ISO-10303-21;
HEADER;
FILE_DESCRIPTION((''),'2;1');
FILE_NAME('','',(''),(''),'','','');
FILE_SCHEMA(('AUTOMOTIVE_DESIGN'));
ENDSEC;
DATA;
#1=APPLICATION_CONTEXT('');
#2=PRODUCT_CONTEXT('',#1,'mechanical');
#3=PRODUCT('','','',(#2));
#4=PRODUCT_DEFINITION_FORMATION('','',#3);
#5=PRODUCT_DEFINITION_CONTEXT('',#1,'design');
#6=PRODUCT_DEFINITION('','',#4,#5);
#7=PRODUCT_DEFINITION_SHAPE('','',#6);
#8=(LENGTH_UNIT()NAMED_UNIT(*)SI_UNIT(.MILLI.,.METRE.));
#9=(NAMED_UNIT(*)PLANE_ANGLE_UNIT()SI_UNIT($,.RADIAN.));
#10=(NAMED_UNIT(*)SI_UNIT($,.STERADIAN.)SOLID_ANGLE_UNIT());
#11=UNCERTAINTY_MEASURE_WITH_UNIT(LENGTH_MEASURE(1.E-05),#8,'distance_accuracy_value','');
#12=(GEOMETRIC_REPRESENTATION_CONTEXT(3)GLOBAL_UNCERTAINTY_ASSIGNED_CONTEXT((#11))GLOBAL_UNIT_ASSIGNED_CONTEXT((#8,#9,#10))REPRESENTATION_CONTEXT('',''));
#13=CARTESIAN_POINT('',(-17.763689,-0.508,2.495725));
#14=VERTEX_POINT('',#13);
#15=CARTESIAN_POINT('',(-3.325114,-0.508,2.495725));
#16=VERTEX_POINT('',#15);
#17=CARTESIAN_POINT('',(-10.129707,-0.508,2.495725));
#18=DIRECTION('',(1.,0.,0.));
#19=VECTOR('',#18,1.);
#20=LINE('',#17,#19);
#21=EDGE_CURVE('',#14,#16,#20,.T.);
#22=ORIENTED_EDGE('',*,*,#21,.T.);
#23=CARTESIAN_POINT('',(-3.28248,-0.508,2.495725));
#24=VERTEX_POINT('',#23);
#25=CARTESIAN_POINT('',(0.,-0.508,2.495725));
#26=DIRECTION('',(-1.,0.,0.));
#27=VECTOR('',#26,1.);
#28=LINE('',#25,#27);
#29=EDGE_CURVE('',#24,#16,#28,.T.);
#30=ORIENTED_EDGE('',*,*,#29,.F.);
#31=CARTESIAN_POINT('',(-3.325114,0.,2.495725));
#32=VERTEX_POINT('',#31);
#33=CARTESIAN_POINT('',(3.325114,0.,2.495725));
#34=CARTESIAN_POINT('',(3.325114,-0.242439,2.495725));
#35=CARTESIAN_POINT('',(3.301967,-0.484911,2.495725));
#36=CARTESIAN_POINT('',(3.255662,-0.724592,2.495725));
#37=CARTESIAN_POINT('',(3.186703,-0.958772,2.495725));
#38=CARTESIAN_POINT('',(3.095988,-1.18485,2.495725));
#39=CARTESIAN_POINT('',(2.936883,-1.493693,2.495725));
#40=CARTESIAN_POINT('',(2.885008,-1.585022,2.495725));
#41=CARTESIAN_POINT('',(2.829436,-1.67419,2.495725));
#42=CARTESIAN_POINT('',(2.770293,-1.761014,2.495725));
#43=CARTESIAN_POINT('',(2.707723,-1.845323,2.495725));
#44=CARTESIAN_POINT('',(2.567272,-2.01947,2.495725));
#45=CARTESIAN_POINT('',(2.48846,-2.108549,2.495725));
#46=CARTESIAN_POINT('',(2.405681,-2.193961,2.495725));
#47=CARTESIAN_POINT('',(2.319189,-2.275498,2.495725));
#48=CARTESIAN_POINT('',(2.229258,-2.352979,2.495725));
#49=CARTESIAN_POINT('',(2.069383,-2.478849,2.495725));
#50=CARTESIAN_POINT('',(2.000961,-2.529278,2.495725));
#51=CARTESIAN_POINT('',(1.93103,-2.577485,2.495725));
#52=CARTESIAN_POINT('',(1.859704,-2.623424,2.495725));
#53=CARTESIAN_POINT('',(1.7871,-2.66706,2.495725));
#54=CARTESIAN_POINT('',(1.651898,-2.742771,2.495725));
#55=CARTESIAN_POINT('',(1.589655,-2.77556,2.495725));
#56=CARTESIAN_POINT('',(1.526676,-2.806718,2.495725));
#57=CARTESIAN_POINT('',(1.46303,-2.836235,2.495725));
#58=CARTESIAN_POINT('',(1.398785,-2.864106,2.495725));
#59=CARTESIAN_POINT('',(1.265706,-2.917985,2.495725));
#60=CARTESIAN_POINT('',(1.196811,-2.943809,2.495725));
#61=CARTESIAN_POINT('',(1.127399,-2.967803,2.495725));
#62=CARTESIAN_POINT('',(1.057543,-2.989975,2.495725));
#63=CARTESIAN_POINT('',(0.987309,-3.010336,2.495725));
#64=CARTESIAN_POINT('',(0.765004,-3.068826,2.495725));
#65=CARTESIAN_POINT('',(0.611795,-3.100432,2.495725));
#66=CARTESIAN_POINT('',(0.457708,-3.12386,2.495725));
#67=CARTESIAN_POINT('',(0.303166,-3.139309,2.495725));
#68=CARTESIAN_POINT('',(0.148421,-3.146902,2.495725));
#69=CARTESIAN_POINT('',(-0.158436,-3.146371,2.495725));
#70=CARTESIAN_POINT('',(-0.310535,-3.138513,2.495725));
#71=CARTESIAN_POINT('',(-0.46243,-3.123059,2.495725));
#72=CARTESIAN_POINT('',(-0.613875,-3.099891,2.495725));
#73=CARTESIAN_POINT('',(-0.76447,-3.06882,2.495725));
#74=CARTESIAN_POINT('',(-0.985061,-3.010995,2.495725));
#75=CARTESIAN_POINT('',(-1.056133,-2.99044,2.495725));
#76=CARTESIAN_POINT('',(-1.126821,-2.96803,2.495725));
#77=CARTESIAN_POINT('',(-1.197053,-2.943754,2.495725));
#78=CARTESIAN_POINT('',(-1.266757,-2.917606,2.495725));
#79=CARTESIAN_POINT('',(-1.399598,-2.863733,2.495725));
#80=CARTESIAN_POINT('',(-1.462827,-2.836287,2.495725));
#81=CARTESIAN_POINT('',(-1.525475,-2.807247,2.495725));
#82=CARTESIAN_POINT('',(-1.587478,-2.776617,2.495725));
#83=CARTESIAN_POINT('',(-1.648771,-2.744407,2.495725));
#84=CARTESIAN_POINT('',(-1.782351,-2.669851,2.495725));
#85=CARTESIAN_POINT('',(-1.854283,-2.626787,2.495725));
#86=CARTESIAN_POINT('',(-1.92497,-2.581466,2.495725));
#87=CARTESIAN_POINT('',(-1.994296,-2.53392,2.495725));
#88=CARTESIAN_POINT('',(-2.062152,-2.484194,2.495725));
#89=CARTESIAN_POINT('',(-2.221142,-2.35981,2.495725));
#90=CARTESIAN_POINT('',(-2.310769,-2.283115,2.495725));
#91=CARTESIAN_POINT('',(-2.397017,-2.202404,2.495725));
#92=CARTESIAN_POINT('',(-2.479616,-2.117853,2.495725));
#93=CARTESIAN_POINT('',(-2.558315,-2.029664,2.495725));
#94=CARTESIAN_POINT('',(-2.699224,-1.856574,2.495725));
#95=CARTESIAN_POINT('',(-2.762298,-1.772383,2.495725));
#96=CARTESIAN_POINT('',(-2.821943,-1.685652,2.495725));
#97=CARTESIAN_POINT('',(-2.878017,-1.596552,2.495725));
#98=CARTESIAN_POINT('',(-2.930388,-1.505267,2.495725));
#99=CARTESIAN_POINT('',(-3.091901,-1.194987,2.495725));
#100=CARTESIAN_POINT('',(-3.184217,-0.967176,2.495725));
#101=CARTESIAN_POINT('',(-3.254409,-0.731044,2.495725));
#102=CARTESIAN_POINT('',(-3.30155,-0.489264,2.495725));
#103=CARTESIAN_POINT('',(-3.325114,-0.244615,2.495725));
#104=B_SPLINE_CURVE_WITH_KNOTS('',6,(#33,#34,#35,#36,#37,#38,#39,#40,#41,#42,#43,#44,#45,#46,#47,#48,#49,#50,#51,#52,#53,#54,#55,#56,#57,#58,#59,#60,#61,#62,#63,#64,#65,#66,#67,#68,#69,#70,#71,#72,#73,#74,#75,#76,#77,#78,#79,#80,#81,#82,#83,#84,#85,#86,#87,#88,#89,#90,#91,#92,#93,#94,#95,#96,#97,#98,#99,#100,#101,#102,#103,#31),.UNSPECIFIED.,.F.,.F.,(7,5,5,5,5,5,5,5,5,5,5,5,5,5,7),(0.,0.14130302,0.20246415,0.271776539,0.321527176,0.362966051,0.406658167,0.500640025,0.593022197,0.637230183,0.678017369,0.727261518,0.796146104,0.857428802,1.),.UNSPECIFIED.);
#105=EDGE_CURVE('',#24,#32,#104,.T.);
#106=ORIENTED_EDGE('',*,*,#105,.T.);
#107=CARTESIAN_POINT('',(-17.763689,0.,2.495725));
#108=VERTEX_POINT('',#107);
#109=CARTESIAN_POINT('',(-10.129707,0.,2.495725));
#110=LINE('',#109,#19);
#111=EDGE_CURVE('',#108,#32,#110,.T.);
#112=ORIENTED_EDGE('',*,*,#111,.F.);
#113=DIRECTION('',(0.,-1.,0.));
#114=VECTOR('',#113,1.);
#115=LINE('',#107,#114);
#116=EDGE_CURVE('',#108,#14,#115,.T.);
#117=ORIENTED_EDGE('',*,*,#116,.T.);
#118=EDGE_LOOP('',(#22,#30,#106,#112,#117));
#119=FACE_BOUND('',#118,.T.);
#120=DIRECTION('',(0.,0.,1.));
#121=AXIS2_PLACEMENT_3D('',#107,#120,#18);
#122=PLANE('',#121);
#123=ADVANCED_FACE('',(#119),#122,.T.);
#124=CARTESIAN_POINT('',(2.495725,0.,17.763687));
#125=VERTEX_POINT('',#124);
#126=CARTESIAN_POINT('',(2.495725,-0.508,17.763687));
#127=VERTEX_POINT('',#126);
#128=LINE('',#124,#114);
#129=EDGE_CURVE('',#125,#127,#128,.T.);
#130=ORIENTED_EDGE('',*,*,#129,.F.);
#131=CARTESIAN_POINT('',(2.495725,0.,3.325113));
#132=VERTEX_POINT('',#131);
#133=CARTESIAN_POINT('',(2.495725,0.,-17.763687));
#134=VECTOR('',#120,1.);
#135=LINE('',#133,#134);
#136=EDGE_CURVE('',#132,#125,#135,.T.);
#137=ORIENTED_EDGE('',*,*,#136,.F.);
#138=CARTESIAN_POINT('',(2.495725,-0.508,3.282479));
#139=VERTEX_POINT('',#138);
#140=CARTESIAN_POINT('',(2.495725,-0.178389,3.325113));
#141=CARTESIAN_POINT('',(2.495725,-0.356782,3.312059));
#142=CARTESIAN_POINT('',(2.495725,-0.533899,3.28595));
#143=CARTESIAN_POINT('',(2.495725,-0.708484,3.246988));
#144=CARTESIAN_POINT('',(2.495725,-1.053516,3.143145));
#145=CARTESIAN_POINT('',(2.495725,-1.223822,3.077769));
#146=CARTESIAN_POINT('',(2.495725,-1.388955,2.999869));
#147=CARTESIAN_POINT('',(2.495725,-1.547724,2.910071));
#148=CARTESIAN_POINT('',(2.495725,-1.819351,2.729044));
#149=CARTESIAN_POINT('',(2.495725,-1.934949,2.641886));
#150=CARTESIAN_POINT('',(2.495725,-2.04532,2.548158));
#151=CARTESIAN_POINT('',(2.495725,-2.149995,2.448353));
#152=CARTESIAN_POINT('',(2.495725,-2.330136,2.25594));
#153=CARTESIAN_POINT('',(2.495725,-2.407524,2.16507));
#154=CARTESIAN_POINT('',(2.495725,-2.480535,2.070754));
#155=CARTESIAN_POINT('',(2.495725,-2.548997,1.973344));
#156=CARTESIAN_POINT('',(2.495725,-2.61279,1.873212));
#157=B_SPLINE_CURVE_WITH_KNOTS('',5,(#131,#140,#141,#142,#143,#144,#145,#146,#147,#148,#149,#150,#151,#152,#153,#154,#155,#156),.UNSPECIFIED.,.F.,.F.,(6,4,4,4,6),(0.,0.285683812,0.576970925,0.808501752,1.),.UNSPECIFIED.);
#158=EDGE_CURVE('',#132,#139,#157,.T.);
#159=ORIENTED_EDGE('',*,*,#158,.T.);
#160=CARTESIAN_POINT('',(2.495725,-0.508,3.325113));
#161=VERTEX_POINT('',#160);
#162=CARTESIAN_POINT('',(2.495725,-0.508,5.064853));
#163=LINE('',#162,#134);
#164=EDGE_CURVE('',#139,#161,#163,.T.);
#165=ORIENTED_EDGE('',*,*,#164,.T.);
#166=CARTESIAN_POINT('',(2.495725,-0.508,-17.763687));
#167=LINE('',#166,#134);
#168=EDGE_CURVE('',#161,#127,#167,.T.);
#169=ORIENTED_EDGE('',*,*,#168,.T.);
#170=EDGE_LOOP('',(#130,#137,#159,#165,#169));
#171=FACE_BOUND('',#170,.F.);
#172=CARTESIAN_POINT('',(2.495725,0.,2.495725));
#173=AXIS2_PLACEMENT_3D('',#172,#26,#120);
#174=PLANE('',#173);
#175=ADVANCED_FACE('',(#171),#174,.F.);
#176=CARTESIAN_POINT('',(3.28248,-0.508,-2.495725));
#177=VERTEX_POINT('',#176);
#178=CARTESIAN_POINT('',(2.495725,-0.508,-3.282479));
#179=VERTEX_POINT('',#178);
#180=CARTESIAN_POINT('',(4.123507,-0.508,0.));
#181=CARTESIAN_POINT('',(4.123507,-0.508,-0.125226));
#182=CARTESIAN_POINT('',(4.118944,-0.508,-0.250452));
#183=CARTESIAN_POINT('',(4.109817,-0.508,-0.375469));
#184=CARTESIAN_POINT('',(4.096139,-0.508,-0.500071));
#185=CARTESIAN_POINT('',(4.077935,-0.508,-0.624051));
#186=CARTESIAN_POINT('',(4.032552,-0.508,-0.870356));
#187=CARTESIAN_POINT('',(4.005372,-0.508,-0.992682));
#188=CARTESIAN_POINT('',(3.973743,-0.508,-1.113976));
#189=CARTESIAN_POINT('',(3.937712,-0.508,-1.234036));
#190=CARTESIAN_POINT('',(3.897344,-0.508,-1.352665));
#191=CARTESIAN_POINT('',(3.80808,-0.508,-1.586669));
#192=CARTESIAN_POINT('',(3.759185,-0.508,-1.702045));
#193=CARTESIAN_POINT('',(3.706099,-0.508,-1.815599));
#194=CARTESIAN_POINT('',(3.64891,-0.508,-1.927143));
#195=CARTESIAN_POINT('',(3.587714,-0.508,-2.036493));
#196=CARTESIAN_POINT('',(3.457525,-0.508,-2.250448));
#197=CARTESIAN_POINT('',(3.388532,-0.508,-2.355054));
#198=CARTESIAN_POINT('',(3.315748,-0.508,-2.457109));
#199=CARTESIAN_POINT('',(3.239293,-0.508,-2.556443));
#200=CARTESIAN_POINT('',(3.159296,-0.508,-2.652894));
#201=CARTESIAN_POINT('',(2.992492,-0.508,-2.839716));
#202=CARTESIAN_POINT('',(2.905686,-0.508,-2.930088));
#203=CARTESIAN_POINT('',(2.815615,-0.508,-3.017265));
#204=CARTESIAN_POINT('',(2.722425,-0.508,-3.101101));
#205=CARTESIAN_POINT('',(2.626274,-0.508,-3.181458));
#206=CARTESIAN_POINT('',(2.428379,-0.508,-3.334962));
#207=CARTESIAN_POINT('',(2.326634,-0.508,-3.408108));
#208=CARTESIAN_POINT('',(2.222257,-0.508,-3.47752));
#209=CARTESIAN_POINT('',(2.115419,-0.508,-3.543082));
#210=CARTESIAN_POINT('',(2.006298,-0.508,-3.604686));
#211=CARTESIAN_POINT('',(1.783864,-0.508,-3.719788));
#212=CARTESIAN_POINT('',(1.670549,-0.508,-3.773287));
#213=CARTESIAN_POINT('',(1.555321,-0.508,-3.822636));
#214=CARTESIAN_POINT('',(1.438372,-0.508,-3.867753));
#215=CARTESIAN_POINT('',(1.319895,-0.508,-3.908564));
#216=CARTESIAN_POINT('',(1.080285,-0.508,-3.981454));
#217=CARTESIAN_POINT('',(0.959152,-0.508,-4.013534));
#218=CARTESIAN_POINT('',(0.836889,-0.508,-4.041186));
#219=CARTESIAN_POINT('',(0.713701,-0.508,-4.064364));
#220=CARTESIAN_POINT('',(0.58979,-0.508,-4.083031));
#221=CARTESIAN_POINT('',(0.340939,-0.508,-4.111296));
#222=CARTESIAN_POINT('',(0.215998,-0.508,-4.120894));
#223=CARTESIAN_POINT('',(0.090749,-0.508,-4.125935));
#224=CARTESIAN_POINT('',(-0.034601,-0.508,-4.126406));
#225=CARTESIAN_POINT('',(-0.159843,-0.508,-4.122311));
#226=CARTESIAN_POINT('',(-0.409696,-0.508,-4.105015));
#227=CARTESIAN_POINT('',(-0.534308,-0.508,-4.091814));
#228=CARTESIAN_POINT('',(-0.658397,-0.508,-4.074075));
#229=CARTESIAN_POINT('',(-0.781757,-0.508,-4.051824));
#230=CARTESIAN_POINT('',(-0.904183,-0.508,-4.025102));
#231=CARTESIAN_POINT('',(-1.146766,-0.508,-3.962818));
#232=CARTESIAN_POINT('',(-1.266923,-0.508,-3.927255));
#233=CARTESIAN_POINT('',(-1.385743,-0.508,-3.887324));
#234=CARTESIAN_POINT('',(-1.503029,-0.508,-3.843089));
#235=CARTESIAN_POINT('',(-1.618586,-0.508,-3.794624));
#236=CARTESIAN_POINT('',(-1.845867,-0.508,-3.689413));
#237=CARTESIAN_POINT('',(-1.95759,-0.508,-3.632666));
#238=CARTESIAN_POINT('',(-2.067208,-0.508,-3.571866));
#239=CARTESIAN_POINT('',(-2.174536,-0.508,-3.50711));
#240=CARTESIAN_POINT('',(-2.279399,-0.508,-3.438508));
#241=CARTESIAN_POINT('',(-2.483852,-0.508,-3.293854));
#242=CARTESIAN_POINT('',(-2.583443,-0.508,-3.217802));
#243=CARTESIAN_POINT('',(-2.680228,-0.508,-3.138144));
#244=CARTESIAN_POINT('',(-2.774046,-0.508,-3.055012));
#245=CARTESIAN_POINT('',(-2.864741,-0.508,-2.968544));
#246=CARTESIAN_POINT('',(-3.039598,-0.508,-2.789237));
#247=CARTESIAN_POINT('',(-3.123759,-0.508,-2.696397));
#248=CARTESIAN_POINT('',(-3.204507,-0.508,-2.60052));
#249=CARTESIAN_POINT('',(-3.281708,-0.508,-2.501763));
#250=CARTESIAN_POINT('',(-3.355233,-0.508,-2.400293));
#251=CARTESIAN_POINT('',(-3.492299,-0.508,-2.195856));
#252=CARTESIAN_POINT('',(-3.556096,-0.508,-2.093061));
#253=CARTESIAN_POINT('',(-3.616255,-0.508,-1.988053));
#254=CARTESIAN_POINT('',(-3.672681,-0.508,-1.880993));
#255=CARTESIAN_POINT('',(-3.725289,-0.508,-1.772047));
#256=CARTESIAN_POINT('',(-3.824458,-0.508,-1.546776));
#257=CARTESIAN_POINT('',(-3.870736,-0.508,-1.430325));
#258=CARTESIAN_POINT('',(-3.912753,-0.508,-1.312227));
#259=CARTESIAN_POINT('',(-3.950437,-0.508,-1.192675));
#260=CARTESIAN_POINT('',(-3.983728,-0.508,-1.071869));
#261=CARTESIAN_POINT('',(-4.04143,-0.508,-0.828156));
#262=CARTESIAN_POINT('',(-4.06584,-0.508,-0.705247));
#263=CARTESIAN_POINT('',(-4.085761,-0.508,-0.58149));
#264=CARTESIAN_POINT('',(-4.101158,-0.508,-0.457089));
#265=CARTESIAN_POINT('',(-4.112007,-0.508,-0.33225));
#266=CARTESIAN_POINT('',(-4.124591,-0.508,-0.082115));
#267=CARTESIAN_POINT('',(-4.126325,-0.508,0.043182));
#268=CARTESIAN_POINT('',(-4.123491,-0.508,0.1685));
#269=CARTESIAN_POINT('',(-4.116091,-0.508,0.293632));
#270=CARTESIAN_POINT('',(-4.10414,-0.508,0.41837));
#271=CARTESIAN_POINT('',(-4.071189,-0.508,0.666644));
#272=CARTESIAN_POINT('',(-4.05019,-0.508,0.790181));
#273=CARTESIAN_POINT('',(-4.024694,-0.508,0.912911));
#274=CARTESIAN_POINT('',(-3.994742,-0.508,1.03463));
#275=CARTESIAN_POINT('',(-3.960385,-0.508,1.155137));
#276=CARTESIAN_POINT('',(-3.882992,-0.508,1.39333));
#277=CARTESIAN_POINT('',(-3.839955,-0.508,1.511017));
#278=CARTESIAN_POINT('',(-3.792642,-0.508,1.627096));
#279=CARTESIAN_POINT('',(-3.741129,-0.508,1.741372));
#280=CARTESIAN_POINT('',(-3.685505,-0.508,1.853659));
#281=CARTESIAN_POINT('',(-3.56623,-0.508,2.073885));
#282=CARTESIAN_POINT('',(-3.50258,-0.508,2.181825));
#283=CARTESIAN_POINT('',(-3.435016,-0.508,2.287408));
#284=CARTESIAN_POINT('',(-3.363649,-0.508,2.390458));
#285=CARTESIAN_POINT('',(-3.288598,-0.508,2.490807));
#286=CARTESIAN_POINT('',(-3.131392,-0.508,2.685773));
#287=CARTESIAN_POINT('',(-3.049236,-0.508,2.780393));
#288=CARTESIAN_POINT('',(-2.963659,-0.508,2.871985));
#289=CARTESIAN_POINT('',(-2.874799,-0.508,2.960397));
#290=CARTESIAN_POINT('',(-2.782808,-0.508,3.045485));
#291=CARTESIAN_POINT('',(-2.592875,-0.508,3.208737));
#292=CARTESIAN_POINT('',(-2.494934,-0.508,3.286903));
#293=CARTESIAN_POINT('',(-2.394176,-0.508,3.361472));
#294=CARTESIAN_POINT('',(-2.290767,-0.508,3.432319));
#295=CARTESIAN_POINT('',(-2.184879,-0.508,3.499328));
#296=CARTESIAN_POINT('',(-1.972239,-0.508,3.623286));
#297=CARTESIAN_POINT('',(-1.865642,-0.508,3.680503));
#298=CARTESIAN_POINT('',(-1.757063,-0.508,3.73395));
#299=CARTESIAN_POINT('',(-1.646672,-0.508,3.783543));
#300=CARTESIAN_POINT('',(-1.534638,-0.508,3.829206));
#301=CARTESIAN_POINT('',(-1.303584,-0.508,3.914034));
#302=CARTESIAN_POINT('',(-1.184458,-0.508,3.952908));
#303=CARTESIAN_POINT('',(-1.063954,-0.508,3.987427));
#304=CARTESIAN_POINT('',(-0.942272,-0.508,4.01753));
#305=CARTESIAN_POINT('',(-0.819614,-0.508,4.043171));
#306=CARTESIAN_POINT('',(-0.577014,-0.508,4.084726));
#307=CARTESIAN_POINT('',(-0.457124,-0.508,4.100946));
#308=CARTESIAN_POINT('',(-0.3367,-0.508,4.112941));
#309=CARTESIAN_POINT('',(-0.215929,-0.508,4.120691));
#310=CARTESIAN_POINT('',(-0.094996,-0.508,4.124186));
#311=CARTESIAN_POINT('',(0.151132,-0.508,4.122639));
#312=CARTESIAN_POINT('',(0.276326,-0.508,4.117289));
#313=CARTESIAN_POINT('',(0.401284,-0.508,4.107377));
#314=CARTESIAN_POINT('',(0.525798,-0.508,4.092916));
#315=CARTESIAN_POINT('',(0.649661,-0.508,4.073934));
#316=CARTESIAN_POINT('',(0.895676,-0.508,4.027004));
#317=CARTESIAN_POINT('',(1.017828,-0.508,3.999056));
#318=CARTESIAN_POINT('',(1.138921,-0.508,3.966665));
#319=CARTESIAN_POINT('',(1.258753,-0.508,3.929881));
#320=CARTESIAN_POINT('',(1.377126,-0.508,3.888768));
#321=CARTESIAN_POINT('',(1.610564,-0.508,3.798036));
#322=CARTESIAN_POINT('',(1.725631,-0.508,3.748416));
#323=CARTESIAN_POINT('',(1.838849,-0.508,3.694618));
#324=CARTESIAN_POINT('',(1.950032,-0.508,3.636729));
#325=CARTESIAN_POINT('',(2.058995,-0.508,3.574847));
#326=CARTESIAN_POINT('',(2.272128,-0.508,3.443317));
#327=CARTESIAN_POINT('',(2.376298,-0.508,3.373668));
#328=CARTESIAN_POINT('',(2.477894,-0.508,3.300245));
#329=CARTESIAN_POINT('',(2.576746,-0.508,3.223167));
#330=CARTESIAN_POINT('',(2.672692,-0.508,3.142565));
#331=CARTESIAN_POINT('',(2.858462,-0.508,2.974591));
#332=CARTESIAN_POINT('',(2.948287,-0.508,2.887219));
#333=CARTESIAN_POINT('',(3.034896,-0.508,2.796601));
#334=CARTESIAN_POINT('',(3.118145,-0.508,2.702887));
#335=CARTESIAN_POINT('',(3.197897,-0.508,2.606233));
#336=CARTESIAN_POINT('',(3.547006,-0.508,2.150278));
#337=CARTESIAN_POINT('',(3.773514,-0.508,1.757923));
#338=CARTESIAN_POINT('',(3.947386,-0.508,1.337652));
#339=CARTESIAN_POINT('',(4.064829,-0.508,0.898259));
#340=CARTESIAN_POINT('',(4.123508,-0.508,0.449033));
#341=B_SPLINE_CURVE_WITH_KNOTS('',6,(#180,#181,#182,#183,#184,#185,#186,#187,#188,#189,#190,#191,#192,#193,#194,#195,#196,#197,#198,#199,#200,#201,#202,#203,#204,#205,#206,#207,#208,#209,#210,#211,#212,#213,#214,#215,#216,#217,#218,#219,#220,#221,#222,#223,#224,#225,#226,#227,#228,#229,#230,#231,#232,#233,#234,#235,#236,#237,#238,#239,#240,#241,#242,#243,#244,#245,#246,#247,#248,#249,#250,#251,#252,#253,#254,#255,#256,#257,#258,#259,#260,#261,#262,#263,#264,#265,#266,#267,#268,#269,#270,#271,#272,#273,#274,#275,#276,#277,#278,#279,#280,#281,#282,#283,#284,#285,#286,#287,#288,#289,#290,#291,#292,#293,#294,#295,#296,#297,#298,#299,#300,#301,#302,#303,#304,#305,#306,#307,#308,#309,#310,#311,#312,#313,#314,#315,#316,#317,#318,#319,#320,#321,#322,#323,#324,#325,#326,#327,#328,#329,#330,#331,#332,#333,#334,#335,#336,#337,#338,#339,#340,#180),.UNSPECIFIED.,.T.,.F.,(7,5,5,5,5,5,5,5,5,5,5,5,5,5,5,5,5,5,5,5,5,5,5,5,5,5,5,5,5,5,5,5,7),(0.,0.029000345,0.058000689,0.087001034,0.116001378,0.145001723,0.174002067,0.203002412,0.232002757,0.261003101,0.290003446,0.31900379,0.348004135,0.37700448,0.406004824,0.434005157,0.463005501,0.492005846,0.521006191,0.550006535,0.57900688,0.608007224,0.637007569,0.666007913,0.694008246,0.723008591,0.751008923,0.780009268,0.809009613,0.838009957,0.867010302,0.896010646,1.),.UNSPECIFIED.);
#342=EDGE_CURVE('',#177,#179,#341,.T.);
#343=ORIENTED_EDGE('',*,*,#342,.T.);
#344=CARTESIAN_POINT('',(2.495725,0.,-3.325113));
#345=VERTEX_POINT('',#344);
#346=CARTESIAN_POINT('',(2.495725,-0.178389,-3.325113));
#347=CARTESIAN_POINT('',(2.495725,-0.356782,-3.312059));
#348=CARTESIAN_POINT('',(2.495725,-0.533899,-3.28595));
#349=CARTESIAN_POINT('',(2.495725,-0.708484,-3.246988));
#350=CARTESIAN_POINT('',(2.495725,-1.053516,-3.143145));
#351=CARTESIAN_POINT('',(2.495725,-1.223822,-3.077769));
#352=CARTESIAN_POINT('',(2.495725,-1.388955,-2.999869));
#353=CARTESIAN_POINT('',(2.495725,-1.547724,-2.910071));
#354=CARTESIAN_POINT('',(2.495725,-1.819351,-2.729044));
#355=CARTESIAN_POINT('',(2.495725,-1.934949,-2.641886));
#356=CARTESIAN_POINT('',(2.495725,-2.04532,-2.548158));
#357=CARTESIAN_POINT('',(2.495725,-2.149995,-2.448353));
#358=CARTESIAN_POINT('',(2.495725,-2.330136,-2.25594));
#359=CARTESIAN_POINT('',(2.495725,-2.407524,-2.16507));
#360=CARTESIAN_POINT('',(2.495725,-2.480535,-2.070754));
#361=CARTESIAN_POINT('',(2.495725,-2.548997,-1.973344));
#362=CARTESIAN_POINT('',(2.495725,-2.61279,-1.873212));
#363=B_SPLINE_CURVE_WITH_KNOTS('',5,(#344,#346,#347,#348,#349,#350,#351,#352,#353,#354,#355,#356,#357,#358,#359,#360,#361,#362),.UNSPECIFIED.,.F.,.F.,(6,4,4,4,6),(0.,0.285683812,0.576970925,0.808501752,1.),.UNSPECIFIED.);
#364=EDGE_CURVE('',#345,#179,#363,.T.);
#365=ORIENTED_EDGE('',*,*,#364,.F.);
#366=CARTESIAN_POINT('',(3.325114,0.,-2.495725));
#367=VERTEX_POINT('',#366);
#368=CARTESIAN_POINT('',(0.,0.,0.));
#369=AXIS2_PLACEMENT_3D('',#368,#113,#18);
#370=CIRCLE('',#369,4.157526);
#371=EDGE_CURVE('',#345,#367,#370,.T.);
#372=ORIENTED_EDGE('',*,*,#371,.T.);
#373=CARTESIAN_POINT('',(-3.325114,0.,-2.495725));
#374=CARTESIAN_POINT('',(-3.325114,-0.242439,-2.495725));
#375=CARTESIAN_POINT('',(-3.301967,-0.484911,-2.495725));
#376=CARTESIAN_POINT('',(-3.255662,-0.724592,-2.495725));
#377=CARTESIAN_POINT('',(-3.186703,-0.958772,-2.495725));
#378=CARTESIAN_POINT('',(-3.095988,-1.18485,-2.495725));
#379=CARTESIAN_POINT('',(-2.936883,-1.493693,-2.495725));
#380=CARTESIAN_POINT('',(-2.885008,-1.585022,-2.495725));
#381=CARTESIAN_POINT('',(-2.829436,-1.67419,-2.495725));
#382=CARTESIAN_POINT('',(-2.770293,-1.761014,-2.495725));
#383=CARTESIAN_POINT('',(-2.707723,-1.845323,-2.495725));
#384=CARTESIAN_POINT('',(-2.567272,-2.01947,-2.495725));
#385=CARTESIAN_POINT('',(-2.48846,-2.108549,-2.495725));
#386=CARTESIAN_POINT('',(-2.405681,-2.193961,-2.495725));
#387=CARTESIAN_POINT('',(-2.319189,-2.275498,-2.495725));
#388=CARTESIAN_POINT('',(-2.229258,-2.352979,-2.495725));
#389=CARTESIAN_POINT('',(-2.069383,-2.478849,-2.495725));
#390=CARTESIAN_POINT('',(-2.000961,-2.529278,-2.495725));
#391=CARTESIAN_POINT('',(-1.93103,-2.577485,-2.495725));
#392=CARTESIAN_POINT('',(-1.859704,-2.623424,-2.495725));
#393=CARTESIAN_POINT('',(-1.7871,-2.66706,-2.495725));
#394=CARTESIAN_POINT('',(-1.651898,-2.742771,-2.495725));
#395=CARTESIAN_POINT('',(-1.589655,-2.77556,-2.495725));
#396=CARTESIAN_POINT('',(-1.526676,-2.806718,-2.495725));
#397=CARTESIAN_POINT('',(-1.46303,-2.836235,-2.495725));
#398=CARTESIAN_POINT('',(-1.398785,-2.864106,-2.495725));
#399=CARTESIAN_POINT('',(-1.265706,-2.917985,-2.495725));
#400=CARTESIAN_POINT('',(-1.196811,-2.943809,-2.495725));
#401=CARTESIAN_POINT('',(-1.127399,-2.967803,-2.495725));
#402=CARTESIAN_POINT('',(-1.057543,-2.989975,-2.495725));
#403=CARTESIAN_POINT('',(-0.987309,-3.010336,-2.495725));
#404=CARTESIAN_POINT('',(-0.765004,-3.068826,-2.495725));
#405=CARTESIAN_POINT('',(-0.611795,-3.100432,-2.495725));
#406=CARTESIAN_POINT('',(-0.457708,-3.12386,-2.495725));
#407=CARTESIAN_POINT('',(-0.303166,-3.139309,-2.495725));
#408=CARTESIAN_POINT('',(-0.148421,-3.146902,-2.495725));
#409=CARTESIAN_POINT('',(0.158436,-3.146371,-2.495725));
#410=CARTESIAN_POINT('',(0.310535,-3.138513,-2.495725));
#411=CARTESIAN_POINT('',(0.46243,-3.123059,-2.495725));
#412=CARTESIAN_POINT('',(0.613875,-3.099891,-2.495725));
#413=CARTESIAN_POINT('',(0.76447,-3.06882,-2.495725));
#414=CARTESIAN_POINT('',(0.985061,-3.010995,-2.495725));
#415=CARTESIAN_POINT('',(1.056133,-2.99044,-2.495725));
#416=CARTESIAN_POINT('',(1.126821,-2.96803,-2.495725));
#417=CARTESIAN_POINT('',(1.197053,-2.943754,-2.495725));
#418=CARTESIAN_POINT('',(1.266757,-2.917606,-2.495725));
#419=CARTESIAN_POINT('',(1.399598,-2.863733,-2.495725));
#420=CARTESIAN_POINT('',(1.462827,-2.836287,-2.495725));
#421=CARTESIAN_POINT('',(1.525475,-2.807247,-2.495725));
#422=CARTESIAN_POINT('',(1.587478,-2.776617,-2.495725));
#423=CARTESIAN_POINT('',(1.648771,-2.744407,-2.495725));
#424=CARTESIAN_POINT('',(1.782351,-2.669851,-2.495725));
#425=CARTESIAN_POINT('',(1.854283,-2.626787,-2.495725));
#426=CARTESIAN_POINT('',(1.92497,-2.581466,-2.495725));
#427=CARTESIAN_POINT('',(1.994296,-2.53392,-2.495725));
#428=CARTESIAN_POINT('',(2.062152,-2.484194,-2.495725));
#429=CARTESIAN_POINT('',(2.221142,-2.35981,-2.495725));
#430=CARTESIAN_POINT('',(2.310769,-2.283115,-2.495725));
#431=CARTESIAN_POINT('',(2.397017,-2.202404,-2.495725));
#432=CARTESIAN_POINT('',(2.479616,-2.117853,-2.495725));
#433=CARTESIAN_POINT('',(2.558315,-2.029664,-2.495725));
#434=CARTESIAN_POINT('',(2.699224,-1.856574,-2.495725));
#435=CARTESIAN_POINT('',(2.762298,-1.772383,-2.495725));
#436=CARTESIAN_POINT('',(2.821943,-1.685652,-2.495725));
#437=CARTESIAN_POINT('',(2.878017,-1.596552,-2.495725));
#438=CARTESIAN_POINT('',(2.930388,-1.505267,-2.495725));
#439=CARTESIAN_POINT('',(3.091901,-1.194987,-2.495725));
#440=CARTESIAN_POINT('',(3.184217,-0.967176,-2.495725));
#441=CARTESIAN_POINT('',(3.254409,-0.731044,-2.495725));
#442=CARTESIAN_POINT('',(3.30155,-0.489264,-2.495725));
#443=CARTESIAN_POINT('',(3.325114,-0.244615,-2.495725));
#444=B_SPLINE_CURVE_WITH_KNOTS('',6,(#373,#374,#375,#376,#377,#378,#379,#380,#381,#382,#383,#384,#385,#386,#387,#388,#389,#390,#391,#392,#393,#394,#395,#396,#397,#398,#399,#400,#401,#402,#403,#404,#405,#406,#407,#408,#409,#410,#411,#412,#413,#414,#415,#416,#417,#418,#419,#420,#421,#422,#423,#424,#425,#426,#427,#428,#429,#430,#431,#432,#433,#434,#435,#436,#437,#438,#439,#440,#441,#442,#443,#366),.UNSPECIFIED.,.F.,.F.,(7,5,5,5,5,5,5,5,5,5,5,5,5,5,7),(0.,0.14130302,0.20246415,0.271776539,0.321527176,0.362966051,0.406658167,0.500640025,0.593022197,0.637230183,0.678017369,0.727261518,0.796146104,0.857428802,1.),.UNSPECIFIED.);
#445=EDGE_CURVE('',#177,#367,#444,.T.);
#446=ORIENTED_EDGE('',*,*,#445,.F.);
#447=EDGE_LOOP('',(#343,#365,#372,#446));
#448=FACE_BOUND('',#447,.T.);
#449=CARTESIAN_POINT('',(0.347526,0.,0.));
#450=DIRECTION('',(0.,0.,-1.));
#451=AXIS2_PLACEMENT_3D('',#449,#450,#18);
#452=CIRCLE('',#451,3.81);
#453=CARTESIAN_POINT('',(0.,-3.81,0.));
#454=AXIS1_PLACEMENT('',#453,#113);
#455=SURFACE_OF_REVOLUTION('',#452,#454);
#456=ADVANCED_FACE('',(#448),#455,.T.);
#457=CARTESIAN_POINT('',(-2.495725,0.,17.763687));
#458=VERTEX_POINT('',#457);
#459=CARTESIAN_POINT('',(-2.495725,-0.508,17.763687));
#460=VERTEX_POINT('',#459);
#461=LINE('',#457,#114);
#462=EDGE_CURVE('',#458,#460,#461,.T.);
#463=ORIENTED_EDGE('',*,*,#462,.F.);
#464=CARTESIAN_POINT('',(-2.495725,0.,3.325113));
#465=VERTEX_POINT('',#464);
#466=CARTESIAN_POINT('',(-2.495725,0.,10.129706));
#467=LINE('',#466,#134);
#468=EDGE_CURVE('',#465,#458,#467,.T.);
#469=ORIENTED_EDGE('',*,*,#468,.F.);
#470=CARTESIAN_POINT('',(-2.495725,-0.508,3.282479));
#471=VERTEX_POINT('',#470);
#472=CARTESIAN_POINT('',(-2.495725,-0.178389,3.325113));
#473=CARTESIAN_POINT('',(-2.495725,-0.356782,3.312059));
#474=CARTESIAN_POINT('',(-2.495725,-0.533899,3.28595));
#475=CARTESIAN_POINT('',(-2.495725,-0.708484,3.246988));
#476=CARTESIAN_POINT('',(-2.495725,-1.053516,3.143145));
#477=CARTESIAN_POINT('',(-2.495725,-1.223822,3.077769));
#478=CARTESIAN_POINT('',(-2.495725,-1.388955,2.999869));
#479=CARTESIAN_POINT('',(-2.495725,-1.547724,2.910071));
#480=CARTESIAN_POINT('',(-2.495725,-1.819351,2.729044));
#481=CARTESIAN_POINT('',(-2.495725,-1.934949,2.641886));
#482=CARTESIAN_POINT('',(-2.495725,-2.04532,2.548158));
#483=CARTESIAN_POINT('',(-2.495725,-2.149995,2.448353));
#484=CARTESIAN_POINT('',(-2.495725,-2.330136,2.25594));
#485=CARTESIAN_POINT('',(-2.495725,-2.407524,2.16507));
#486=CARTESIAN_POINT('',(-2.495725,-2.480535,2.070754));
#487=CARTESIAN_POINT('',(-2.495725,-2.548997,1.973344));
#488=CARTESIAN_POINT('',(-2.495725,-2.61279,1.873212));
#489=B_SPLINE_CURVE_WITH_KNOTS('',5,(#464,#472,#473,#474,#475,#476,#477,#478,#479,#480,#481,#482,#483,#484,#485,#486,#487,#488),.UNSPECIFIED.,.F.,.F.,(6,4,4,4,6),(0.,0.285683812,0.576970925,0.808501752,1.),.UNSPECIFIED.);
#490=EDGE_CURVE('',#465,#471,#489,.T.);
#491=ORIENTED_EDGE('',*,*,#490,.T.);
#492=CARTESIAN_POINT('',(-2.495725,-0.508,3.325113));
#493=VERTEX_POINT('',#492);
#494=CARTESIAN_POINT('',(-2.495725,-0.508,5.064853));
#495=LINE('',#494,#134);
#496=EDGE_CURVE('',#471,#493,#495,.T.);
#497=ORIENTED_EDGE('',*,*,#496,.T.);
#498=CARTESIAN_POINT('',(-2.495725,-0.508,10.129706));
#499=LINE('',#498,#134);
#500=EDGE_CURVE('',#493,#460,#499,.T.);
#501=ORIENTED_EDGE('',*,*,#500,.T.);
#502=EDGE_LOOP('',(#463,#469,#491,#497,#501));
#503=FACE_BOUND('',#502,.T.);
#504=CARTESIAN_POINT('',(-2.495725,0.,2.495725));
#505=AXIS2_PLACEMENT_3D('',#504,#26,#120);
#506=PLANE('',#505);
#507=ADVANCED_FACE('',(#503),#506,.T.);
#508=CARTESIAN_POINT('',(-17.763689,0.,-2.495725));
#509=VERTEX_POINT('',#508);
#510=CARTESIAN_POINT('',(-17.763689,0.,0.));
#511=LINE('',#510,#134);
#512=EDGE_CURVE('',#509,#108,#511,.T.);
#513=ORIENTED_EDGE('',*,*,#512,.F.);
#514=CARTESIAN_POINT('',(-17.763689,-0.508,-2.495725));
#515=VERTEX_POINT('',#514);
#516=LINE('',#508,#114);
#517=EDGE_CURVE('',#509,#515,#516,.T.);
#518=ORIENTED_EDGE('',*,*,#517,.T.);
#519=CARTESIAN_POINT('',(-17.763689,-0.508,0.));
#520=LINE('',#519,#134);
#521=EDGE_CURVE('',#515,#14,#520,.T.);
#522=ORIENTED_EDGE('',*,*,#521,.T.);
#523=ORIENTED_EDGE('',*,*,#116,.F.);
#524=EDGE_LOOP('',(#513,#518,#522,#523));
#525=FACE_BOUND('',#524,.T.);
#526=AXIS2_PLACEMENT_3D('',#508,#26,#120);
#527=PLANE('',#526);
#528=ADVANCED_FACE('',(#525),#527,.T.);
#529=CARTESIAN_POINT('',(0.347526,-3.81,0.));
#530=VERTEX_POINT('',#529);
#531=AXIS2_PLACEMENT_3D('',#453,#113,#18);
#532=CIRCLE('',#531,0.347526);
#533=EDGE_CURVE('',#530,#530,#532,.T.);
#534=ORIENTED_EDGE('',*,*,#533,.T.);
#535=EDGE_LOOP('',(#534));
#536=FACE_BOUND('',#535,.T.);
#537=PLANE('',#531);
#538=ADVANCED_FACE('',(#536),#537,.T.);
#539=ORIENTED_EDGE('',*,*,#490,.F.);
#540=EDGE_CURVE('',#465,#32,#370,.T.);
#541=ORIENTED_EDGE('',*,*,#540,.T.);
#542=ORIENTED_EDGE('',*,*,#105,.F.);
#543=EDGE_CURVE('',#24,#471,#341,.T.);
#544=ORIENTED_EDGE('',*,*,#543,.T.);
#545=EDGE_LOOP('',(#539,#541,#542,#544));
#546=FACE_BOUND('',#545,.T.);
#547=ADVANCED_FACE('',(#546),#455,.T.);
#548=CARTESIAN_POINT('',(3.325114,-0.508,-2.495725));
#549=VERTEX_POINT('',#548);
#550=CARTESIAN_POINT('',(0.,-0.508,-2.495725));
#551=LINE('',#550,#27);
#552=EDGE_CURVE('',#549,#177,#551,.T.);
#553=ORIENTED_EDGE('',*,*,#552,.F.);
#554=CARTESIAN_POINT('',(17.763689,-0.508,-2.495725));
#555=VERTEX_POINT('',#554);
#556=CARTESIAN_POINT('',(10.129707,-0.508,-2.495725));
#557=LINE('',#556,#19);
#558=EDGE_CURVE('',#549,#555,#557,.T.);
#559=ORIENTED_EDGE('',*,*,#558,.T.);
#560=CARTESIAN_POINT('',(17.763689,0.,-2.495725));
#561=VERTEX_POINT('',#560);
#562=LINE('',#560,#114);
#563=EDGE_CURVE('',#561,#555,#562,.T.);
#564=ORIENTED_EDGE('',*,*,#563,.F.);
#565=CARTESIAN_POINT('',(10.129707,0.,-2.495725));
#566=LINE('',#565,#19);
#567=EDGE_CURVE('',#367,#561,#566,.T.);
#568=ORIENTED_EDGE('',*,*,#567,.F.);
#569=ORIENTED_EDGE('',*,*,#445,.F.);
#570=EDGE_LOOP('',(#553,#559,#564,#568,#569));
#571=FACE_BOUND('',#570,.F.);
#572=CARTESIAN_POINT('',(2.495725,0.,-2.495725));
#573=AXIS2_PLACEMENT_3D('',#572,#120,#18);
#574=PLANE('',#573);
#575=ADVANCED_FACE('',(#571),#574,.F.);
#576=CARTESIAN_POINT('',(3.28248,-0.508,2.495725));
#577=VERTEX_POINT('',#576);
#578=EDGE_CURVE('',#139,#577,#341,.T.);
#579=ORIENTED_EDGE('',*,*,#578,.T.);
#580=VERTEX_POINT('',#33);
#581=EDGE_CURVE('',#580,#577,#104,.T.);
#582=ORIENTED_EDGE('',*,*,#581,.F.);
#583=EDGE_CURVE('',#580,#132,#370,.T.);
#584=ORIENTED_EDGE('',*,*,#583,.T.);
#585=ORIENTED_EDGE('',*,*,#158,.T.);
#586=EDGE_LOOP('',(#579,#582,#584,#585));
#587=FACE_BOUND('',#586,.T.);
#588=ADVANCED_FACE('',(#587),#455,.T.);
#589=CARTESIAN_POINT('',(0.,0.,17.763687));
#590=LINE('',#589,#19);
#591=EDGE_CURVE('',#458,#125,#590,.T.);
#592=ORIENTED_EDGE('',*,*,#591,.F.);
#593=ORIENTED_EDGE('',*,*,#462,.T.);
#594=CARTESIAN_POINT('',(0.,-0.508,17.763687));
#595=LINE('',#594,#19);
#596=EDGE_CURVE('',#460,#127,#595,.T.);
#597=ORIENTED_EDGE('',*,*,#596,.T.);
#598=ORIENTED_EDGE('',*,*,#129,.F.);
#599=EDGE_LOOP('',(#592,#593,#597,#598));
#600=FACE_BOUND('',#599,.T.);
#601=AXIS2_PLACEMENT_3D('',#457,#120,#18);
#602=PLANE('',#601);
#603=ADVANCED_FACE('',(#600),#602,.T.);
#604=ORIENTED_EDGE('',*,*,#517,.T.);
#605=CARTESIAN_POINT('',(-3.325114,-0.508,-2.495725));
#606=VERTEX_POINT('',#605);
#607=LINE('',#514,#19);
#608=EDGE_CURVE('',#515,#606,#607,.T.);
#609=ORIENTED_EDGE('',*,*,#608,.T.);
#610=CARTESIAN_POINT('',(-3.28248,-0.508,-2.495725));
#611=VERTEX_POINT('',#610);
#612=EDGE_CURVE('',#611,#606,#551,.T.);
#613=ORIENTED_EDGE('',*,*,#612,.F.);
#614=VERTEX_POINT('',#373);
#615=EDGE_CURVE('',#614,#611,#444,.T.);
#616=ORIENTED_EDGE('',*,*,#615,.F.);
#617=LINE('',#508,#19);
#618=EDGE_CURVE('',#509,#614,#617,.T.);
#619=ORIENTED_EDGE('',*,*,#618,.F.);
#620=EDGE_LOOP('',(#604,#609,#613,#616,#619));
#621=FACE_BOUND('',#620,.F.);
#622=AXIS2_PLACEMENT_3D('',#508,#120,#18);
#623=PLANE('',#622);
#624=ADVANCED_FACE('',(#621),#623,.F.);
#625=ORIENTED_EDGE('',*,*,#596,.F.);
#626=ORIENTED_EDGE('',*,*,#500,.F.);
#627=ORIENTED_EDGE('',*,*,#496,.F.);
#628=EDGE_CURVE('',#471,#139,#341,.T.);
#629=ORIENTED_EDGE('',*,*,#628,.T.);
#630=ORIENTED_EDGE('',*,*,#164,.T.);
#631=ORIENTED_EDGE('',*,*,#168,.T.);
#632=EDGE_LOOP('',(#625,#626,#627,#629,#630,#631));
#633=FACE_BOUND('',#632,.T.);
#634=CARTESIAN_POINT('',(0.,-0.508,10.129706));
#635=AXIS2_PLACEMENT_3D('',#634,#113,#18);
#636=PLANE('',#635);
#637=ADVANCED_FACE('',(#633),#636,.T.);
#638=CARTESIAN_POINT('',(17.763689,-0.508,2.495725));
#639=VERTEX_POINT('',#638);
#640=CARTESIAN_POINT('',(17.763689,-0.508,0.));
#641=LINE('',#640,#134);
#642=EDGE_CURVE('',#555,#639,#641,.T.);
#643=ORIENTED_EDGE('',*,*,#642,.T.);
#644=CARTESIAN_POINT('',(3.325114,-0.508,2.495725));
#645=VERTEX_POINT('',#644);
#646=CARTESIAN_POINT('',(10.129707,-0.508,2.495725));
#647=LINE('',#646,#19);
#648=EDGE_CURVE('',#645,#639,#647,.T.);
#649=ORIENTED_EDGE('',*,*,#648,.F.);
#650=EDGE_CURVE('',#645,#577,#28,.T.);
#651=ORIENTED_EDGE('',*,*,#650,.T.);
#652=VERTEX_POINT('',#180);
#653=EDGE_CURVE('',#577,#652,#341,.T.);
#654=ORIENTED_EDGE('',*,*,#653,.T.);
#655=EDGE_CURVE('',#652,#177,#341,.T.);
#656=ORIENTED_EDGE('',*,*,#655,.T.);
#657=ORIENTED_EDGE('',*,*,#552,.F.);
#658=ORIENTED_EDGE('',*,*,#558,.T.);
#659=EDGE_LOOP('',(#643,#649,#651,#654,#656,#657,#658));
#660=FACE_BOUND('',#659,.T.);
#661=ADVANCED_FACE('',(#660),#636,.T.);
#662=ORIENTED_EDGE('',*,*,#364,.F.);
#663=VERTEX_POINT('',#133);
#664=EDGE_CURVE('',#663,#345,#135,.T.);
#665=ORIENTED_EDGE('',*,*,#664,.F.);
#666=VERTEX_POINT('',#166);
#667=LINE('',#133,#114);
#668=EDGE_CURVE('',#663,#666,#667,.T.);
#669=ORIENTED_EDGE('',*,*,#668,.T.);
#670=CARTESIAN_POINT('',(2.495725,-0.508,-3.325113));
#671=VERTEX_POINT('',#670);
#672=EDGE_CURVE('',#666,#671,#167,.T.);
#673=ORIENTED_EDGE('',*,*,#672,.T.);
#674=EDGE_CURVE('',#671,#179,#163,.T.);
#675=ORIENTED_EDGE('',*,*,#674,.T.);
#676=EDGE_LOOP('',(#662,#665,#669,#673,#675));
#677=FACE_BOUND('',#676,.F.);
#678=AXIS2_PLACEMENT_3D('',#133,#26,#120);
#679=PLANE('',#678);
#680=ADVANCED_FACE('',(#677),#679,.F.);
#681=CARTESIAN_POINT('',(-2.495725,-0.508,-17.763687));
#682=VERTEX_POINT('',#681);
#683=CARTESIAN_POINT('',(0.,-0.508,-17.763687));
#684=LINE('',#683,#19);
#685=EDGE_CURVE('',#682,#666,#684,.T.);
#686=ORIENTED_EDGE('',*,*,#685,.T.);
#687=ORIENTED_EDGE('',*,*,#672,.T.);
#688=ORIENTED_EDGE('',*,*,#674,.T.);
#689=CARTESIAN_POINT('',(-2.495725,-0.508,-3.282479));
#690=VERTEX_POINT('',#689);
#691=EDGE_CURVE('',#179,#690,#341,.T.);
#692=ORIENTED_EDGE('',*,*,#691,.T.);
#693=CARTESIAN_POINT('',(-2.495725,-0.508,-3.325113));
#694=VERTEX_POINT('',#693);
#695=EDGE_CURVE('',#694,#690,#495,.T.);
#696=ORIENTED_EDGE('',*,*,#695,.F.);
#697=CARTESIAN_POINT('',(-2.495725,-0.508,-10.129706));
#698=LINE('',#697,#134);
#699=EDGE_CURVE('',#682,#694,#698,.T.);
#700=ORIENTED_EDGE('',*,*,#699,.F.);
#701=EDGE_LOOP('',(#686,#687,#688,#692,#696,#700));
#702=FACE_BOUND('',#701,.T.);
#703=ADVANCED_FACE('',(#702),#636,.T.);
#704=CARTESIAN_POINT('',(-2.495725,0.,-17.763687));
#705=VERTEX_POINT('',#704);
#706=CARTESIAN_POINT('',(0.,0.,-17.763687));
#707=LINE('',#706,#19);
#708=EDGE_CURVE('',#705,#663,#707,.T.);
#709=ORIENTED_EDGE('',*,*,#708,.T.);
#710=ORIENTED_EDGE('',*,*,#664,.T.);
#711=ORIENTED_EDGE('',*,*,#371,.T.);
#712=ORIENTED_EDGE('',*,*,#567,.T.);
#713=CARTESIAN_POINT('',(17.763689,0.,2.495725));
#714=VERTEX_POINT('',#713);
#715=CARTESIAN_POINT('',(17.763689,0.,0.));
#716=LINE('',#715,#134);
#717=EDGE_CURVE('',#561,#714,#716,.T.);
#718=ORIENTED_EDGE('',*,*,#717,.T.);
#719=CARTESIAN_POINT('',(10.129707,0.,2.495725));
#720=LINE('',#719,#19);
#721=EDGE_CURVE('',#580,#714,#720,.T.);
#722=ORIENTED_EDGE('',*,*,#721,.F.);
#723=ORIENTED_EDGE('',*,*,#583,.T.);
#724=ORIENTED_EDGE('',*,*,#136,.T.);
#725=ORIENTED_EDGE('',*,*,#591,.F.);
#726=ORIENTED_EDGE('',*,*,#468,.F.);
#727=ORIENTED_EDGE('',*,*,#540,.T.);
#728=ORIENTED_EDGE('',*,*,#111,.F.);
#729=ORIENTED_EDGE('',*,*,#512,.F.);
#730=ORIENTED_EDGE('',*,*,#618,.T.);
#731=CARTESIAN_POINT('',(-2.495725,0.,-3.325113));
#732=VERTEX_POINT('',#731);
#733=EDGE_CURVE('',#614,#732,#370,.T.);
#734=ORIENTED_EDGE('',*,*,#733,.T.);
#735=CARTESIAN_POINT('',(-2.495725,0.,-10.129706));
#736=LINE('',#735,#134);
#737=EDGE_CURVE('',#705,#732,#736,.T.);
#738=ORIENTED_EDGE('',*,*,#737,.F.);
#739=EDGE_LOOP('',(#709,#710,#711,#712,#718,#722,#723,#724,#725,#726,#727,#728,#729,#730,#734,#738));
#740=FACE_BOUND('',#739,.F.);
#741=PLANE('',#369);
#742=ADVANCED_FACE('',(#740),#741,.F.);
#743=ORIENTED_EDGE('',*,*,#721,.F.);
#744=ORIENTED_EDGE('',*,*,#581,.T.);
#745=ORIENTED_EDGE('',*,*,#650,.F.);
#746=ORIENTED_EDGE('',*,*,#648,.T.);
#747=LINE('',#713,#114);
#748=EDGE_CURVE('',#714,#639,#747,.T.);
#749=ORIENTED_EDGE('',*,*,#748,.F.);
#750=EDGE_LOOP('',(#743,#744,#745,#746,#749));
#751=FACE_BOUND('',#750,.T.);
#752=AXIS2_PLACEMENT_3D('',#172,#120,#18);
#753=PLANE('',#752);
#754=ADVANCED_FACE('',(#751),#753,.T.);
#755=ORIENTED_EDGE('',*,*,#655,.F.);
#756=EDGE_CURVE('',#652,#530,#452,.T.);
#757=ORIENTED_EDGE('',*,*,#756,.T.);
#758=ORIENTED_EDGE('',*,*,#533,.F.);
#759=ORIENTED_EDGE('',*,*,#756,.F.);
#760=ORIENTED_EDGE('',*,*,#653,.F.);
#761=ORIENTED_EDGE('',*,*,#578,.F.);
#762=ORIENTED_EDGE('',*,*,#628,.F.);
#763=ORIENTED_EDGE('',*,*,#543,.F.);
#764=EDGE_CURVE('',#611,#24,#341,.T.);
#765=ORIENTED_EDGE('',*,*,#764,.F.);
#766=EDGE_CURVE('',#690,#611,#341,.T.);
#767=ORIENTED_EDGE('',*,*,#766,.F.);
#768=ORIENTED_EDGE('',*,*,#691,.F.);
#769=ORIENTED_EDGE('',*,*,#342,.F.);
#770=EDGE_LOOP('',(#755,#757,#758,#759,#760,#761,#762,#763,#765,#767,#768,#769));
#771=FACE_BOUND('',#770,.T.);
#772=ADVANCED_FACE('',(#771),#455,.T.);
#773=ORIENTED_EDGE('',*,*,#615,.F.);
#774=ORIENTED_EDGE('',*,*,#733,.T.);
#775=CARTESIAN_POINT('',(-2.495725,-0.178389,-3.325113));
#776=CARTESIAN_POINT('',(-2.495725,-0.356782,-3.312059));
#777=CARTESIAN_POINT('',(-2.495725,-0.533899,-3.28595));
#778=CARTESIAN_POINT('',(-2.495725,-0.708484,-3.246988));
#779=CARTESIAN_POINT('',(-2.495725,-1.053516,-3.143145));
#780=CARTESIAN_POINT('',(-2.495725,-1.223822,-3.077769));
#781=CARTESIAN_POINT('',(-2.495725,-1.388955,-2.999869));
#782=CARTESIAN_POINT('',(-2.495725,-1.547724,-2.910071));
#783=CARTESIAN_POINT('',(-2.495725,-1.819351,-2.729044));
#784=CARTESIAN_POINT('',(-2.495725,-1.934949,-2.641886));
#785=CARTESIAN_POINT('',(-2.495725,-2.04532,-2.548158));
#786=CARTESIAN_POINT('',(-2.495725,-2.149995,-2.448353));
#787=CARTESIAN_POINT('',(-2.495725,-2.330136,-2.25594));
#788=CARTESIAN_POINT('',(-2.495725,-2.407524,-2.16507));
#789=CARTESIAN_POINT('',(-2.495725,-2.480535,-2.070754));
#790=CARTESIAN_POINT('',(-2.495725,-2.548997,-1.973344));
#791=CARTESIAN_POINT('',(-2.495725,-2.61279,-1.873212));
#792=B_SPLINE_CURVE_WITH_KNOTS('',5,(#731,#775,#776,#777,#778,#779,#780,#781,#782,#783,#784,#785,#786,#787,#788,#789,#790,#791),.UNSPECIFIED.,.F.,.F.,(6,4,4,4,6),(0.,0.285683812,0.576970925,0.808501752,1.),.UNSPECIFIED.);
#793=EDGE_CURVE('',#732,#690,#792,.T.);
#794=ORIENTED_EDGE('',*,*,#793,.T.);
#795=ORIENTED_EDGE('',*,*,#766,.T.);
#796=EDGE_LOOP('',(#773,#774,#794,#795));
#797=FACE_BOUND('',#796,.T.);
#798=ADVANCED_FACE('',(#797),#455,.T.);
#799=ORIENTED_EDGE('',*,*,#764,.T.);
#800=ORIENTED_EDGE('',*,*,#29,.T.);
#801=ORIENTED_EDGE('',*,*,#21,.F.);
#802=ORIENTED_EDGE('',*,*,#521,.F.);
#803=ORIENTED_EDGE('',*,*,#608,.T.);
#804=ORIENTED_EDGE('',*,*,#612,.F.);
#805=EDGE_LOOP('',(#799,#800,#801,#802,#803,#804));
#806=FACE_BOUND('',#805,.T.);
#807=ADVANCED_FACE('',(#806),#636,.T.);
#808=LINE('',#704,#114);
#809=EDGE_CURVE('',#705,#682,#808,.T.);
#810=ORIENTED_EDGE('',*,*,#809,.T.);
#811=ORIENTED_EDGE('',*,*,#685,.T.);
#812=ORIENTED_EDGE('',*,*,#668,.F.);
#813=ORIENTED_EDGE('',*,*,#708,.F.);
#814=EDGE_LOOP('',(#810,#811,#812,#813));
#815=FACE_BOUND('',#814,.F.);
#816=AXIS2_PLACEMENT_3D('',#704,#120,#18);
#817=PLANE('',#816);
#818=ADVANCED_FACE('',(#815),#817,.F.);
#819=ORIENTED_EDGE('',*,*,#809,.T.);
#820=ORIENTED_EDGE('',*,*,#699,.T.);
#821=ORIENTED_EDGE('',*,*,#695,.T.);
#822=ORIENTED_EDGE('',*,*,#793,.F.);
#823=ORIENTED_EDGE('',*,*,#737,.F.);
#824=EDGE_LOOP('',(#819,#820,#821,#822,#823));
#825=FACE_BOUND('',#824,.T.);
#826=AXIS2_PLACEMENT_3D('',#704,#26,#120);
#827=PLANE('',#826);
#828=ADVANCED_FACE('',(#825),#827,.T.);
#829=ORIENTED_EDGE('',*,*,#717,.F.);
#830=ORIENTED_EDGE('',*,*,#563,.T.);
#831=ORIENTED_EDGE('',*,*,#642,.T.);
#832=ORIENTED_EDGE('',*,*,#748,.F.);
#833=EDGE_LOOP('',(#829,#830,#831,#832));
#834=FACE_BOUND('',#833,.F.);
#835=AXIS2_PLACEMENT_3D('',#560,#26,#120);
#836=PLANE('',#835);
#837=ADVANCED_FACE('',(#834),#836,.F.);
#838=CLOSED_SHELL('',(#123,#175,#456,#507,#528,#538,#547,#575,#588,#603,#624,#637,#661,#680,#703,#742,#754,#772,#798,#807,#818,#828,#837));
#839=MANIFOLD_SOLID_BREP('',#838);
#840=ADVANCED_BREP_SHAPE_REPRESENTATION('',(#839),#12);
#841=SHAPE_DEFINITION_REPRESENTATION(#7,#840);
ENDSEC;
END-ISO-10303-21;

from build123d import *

# Parameters (mm, degrees)
F0_R     = 4.1575260002
F1_DEPTH = 3.81
F2_W     = 4.9914508127
F2_H     = 15.2679625899
F2_W_2   = 15.267963754
F2_H_2   = 4.9914494157
F3_DEPTH = 0.508


# Not quite as in the source:
# - a fillet or chamfer that OpenCascade refuses, or shapes differently, is made with other operations: its cross-section is extruded or revolved along the edge and cut away or added


with BuildPart() as f1:
    # F0 (on Front) → F1 (new body)
    with BuildSketch(Plane.XZ):
        Circle(F0_R)
    extrude(amount=F1_DEPTH)

    # F2 (on Front) → F3 (join)
    with BuildSketch(Plane.XZ):
        with Locations((0, 10.1297060028)):
            Rectangle(F2_W, F2_H)
        with Locations((-10.1297072833, 0)):
            Rectangle(F2_W_2, F2_H_2)
        Rectangle(F2_W, F2_H_2)
        with Locations((0, -10.1297060028)):
            Rectangle(F2_W, F2_H)
        with Locations((10.1297072833, 0)):
            Rectangle(F2_W_2, F2_H_2)
    extrude(amount=F3_DEPTH)

    # F4: fillet of radius 3.81 on 1 edges, made by hand


with BuildPart() as f4_tool2:
    # F4_s3 → F4_t4 (revolve)
    with BuildSketch(Plane.XY):
        with BuildLine():
            ThreePointArc((4.1575260002, 0), (3.0416028366, -2.6940768363), (0.3475260002, -3.81))
            Line((0.3475260002, -3.81), (4.1575260002, -3.81))
            Line((4.1575260002, -3.81), (4.1575260002, 0))
        make_face()
    revolve(axis=Axis((0, -3.81, 0), (0, -1, 0)))

    split(bisect_by=Plane.XZ.offset(0.508), keep=Keep.TOP)


with BuildPart() as f1_1:
    add(f1.part)

    # F4_t1: cut F4_tool2
    add(f4_tool2.part, mode=Mode.SUBTRACT)


with BuildPart() as f4_tool7:
    # F4_s8 → F4_t9 (revolve)
    with BuildSketch(Plane.XY):
        with BuildLine():
            ThreePointArc((4.1575260002, 0), (3.0416028366, -2.6940768363), (0.3475260002, -3.81))
            Line((0.3475260002, -3.81), (4.1575260002, -3.81))
            Line((4.1575260002, -3.81), (4.1575260002, 0))
        make_face()
    revolve(axis=Axis((0, -3.81, 0), (0, -1, 0)))

    split(bisect_by=Plane.XY.offset(2.4957247078), keep=Keep.TOP)

    split(bisect_by=Plane.YZ.offset(2.4957254063), keep=Keep.TOP)


with BuildPart() as f1_2:
    add(f1_1.part)

    # F4_t6: cut F4_tool7
    add(f4_tool7.part, mode=Mode.SUBTRACT)


with BuildPart() as f4_tool13:
    # F4_s14 → F4_t15 (revolve)
    with BuildSketch(Plane.XY):
        with BuildLine():
            ThreePointArc((4.1575260002, 0), (3.0416028366, -2.6940768363), (0.3475260002, -3.81))
            Line((0.3475260002, -3.81), (4.1575260002, -3.81))
            Line((4.1575260002, -3.81), (4.1575260002, 0))
        make_face()
    revolve(axis=Axis((0, -3.81, 0), (0, -1, 0)))

    split(bisect_by=Plane.XY.offset(-2.4957247078), keep=Keep.BOTTOM)

    split(bisect_by=Plane.YZ.offset(2.4957254063), keep=Keep.TOP)


with BuildPart() as f1_3:
    add(f1_2.part)

    # F4_t12: cut F4_tool13
    add(f4_tool13.part, mode=Mode.SUBTRACT)


with BuildPart() as f4_tool19:
    # F4_s20 → F4_t21 (revolve)
    with BuildSketch(Plane.XY):
        with BuildLine():
            ThreePointArc((4.1575260002, 0), (3.0416028366, -2.6940768363), (0.3475260002, -3.81))
            Line((0.3475260002, -3.81), (4.1575260002, -3.81))
            Line((4.1575260002, -3.81), (4.1575260002, 0))
        make_face()
    revolve(axis=Axis((0, -3.81, 0), (0, -1, 0)))

    split(bisect_by=Plane.XY.offset(2.4957247078), keep=Keep.TOP)

    split(bisect_by=Plane.YZ.offset(-2.4957254063), keep=Keep.BOTTOM)


with BuildPart() as f1_4:
    add(f1_3.part)

    # F4_t18: cut F4_tool19
    add(f4_tool19.part, mode=Mode.SUBTRACT)


with BuildPart() as f4_tool25:
    # F4_s26 → F4_t27 (revolve)
    with BuildSketch(Plane.XY):
        with BuildLine():
            ThreePointArc((4.1575260002, 0), (3.0416028366, -2.6940768363), (0.3475260002, -3.81))
            Line((0.3475260002, -3.81), (4.1575260002, -3.81))
            Line((4.1575260002, -3.81), (4.1575260002, 0))
        make_face()
    revolve(axis=Axis((0, -3.81, 0), (0, -1, 0)))

    split(bisect_by=Plane.XY.offset(-2.4957247078), keep=Keep.BOTTOM)

    split(bisect_by=Plane.YZ.offset(-2.4957254063), keep=Keep.BOTTOM)


with BuildPart() as f1_5:
    add(f1_4.part)

    # F4_t24: cut F4_tool25
    add(f4_tool25.part, mode=Mode.SUBTRACT)


solid = f1_5.part
